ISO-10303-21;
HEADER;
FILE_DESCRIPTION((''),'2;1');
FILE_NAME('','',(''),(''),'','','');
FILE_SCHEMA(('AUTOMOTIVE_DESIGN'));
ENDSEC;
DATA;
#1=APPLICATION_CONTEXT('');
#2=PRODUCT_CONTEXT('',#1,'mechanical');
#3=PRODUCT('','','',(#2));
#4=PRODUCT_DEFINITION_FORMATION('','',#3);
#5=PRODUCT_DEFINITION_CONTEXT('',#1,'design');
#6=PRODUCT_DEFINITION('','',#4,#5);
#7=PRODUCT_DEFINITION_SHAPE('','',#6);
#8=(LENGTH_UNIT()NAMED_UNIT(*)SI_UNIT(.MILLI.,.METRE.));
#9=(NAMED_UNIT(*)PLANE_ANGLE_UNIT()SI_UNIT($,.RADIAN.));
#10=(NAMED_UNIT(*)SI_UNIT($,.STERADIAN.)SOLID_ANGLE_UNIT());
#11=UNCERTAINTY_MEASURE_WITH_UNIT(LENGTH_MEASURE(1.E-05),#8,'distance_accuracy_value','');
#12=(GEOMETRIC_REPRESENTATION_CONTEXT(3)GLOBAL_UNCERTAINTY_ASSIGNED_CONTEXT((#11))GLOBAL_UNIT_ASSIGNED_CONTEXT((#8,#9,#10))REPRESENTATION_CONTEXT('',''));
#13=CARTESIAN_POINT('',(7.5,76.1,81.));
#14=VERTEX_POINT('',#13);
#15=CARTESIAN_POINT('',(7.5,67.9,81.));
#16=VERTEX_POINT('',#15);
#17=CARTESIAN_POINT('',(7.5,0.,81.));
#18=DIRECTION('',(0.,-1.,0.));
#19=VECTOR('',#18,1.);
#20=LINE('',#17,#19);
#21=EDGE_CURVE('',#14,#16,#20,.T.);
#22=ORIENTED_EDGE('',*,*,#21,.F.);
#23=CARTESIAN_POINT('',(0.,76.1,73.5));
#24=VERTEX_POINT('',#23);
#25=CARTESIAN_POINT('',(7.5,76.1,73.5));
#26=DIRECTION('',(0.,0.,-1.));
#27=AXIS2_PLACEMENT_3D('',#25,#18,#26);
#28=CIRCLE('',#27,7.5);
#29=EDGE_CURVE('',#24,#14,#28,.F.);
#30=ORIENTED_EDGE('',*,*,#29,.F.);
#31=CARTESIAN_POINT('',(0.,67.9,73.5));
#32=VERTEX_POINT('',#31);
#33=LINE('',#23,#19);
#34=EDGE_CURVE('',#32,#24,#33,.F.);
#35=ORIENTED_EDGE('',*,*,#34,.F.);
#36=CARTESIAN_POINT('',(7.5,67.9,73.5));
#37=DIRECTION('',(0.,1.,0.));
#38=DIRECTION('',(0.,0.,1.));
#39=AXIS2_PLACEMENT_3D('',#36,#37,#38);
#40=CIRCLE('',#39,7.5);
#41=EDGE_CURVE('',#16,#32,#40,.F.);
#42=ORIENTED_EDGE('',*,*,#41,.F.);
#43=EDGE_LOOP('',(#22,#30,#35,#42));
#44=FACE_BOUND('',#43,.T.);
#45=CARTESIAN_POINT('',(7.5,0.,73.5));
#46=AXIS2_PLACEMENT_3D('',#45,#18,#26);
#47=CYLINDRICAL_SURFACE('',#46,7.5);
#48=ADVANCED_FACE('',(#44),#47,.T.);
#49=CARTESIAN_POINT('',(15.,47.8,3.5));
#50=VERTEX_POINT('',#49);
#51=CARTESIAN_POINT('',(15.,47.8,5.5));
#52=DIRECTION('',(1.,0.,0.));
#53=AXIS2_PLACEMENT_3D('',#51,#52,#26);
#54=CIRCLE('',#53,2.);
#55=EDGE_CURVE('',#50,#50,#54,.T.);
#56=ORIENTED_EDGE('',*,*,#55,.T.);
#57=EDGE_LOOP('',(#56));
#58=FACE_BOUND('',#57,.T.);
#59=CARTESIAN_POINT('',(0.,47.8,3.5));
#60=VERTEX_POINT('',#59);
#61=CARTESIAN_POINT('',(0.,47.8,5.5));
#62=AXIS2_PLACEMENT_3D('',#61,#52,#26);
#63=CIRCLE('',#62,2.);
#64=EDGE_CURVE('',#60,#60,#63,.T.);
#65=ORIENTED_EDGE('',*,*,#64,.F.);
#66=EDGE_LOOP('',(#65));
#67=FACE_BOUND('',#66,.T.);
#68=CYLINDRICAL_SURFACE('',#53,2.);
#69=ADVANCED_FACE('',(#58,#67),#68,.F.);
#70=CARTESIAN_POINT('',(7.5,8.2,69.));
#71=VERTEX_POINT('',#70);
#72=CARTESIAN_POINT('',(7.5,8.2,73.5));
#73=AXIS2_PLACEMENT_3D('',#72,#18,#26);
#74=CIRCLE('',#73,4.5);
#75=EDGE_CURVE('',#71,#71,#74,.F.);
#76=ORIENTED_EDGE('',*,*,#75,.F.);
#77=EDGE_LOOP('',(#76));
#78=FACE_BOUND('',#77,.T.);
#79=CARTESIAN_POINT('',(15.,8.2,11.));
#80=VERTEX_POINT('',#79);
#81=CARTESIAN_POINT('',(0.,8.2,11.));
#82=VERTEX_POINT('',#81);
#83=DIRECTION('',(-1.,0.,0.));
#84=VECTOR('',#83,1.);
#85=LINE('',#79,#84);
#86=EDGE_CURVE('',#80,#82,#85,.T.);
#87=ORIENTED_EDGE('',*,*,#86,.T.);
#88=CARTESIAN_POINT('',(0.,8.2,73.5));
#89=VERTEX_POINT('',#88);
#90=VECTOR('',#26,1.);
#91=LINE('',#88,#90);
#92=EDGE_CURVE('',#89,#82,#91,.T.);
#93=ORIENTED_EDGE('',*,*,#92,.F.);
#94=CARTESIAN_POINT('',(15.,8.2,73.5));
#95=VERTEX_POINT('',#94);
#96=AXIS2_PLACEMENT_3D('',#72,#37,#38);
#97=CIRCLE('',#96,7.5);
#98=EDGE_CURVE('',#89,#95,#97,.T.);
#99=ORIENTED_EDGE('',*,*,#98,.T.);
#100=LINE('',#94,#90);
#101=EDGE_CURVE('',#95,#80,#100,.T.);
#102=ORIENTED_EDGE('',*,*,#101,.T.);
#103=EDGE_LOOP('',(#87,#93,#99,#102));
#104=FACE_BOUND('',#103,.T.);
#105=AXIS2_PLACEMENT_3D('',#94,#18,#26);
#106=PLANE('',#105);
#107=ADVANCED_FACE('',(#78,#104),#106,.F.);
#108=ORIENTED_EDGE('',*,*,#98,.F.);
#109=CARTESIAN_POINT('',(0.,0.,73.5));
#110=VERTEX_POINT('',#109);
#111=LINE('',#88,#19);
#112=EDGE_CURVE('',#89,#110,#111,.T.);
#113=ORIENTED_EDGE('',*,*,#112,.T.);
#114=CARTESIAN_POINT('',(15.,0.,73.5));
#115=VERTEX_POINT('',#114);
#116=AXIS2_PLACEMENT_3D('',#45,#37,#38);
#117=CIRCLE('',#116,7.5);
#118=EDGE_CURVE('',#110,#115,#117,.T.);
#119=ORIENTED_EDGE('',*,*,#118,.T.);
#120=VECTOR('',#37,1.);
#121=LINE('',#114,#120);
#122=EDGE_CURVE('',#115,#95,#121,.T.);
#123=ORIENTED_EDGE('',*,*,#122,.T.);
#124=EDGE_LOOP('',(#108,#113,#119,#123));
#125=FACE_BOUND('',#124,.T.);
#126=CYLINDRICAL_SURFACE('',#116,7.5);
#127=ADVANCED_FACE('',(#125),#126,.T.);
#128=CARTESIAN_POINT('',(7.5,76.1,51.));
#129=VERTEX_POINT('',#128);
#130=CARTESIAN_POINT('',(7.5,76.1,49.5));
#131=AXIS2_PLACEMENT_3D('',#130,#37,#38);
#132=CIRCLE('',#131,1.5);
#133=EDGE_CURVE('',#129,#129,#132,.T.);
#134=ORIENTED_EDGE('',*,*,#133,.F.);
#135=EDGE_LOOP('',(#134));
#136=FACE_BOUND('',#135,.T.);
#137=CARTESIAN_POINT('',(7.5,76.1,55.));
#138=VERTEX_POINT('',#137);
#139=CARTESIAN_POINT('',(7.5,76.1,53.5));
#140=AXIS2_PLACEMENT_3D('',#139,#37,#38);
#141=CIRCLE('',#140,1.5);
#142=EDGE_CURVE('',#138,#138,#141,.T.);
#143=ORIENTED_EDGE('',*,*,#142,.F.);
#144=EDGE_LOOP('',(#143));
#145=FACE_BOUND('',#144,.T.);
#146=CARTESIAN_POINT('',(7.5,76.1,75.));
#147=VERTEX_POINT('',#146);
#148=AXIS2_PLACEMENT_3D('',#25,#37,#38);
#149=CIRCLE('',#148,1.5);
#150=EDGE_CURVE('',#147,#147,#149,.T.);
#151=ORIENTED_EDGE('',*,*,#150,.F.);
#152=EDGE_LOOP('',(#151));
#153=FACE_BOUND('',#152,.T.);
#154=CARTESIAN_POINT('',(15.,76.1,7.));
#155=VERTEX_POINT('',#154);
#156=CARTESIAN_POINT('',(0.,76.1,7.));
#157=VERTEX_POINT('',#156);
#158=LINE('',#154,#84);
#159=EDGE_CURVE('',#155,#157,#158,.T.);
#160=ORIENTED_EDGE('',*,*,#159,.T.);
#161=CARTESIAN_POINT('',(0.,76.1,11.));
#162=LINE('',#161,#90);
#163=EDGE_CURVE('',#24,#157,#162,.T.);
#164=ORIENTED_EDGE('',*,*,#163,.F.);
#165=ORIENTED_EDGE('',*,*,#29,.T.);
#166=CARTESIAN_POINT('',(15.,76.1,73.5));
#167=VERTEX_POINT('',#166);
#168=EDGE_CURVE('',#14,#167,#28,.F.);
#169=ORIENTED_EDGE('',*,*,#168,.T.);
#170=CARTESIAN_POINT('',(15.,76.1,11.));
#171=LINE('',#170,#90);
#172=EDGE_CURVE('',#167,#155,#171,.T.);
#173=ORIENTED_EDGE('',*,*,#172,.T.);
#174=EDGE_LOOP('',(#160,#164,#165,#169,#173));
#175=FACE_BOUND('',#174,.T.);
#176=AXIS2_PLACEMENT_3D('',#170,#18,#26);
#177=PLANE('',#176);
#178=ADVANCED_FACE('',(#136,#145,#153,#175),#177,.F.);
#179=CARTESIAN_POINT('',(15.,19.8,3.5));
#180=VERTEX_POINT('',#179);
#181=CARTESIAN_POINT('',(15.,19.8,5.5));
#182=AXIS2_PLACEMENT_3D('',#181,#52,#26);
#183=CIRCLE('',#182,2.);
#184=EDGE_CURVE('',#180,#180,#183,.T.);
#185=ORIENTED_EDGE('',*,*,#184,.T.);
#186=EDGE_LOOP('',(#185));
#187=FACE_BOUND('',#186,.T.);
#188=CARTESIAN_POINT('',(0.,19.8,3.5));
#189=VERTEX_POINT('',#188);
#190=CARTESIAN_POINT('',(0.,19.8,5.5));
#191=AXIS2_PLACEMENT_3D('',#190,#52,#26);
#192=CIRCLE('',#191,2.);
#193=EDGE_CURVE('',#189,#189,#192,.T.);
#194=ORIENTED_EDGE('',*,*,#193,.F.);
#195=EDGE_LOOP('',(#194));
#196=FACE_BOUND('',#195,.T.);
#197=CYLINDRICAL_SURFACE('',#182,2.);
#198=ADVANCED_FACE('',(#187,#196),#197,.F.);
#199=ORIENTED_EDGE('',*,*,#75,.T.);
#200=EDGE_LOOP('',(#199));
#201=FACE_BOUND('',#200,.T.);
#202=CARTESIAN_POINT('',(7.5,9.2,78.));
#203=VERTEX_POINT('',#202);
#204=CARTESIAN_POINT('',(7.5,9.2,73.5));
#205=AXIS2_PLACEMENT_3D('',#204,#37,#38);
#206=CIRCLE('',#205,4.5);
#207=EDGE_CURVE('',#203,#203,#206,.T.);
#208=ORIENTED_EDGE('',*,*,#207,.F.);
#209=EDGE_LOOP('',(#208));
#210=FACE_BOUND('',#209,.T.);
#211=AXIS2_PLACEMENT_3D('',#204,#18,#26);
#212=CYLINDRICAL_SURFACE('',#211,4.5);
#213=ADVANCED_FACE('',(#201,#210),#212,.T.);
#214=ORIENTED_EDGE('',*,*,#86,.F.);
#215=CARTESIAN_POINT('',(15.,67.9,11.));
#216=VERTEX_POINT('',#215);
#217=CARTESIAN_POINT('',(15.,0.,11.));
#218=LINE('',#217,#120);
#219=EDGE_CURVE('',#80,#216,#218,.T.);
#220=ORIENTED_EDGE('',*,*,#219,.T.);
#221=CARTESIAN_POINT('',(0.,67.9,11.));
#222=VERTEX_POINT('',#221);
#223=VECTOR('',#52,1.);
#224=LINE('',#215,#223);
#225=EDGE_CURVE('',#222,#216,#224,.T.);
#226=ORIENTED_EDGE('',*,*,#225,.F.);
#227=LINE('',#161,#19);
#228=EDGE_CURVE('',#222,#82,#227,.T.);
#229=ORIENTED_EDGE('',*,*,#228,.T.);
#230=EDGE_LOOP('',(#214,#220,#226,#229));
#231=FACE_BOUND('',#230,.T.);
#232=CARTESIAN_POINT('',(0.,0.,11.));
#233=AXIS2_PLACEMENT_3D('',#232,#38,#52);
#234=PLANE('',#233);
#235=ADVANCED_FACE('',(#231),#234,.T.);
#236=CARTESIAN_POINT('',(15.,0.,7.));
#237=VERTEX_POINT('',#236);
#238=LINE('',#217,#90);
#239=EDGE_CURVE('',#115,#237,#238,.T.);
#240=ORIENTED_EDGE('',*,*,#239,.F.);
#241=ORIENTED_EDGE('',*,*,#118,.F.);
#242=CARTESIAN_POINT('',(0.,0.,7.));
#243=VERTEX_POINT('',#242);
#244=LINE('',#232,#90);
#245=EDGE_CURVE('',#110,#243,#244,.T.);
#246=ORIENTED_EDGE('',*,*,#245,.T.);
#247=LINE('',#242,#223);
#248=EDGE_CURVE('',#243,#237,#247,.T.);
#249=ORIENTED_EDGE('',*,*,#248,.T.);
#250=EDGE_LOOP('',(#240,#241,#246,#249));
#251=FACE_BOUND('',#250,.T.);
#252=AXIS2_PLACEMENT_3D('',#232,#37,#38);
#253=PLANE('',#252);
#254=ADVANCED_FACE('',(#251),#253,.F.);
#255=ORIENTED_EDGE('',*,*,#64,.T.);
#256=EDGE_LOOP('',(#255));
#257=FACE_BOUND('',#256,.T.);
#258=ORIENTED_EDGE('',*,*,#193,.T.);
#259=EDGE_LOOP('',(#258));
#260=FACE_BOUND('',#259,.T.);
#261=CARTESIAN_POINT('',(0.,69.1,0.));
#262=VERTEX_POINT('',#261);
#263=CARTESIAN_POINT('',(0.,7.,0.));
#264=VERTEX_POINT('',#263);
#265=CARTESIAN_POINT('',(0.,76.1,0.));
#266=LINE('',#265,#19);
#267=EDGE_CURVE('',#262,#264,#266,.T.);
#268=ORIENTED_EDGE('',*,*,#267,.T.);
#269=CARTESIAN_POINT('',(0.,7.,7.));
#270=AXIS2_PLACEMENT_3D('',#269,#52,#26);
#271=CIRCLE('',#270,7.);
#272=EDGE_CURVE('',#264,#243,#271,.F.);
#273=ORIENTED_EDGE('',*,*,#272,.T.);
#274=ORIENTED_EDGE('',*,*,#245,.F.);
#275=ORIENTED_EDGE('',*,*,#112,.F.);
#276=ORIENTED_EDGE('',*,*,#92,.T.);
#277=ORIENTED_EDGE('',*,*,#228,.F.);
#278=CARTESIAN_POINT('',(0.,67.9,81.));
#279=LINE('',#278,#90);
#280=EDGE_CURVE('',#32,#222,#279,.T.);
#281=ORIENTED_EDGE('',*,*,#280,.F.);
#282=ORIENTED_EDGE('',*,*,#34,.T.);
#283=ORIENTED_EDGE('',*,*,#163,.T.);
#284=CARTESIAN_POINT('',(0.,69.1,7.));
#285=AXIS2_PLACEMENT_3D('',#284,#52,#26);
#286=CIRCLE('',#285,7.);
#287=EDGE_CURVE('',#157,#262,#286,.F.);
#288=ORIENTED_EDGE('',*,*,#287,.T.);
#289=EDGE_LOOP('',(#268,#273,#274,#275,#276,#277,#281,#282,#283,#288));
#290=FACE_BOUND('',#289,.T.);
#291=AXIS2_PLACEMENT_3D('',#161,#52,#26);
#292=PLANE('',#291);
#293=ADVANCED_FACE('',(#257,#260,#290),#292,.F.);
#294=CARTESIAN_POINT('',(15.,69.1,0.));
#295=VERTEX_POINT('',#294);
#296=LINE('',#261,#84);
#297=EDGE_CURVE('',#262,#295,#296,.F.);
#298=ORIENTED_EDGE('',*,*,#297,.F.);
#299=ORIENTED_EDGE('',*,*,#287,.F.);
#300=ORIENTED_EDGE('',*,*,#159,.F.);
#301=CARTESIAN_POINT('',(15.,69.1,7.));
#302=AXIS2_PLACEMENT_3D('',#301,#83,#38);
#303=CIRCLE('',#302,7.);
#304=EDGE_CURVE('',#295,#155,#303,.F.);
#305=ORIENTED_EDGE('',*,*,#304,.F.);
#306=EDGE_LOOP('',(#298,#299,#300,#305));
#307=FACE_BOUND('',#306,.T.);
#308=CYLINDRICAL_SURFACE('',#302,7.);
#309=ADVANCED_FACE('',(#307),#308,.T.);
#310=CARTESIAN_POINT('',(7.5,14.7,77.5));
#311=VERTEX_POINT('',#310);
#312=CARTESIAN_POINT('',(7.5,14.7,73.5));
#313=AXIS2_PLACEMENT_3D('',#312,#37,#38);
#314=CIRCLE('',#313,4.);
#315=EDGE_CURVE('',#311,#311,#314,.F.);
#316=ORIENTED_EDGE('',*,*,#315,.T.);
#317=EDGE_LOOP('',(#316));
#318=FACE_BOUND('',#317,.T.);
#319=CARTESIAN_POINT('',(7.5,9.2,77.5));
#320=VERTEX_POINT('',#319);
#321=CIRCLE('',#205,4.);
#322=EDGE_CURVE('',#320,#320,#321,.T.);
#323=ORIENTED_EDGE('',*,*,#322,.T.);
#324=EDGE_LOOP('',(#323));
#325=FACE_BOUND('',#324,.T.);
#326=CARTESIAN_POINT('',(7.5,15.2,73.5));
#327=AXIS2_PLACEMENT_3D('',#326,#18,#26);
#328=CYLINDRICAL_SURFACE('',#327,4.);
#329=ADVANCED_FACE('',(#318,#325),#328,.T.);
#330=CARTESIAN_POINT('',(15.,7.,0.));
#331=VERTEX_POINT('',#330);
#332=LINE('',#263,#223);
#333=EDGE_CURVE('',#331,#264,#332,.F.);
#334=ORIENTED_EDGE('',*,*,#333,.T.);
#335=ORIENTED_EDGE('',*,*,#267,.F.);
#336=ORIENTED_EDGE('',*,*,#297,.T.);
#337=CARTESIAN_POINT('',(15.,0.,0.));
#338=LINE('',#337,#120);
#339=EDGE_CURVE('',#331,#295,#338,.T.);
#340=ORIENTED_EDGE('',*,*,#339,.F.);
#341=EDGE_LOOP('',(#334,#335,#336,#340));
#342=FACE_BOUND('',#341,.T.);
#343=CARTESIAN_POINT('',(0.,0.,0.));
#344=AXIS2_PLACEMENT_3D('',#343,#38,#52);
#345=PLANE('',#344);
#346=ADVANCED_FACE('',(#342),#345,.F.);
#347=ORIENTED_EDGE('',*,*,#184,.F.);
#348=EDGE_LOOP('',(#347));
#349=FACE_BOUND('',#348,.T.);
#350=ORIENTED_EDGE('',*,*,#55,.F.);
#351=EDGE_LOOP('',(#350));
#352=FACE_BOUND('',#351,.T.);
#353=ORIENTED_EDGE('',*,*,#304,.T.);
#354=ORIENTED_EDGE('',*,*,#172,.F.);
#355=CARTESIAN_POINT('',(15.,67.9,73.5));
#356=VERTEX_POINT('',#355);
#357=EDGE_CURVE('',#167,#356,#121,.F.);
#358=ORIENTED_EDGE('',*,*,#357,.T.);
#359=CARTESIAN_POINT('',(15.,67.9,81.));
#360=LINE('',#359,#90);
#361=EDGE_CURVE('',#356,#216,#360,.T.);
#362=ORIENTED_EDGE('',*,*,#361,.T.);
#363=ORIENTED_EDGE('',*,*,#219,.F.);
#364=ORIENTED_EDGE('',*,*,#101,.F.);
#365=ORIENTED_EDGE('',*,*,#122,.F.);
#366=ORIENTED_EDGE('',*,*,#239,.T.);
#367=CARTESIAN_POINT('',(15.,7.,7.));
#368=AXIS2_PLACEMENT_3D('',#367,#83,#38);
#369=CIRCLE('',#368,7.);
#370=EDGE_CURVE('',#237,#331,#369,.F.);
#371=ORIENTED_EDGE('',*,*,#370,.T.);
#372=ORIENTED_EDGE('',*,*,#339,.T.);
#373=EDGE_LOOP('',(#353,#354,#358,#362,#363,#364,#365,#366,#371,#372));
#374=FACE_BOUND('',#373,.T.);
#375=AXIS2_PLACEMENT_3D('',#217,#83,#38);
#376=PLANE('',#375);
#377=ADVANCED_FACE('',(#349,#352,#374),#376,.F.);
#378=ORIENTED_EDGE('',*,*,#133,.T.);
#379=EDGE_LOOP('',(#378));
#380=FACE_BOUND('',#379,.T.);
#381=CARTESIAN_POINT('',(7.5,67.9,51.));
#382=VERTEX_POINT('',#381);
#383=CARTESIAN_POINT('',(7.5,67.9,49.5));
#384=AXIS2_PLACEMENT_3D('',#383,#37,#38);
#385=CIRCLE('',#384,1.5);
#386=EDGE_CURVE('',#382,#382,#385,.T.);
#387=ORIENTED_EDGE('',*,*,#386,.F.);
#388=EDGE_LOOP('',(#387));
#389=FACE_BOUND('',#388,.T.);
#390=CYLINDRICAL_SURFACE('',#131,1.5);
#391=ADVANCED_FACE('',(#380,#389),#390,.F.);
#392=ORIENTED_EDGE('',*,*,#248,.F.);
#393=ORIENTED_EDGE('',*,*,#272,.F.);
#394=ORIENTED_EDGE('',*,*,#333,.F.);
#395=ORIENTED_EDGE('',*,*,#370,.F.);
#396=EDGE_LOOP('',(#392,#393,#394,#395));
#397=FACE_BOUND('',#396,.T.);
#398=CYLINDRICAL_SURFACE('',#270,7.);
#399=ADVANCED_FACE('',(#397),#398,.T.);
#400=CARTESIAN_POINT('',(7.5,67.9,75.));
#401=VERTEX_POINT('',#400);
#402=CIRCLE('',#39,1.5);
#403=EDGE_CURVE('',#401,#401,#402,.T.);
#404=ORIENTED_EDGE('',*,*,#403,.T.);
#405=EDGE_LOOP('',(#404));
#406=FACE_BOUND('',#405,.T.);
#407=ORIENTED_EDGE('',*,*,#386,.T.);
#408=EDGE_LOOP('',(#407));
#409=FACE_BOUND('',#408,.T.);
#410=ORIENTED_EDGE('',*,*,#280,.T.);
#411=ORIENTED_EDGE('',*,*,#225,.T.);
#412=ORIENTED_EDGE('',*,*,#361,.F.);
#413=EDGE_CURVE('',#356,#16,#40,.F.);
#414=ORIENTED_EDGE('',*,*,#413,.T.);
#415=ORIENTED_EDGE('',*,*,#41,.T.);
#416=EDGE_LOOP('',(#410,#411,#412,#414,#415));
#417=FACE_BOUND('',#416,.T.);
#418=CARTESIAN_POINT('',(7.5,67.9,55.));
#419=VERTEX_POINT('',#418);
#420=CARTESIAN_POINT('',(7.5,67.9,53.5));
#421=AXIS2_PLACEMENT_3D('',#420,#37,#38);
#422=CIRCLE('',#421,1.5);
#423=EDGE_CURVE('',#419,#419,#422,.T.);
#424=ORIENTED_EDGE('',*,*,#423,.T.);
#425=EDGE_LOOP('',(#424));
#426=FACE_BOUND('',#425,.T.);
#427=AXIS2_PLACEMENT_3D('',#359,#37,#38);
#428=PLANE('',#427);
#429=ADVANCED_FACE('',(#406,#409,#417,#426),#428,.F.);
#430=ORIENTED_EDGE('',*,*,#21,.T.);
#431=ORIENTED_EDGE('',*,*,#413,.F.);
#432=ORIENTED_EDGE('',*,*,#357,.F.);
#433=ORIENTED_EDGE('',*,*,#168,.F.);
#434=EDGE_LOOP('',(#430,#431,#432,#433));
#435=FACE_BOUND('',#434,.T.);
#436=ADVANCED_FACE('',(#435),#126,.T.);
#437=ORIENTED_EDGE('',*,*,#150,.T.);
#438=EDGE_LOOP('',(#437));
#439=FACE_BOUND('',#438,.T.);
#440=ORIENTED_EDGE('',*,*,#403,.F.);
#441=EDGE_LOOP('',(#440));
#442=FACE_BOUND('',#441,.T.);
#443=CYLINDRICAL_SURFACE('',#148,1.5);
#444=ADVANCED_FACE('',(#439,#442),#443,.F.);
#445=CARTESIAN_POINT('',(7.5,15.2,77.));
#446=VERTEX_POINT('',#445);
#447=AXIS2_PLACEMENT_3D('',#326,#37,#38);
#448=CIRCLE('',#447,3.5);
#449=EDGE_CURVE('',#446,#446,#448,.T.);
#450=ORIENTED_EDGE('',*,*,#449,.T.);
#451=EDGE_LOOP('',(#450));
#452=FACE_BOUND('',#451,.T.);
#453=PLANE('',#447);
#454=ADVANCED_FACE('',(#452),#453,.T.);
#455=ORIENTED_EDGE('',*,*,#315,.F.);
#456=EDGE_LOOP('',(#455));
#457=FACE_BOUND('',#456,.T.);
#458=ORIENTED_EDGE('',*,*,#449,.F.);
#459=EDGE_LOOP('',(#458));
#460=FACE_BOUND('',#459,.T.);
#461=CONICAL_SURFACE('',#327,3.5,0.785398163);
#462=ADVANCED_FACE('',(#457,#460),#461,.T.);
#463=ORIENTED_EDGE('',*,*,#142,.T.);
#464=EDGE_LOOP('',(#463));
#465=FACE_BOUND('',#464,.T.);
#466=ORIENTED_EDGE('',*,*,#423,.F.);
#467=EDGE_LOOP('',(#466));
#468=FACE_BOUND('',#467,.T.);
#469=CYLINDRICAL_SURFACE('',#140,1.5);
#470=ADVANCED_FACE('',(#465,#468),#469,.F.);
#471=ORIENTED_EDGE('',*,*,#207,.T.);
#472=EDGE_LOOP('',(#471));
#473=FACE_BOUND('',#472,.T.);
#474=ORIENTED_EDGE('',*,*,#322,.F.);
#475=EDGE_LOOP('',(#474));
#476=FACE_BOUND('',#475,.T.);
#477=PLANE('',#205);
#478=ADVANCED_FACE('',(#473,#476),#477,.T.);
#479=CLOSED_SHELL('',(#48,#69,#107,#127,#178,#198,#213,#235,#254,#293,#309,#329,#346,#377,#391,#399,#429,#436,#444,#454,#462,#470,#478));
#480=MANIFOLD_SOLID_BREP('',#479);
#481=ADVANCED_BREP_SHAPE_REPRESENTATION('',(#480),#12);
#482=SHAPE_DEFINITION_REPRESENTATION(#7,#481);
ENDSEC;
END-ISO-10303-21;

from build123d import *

# Parameters (mm, degrees)
SCHIZZO1_W                   = 15
SCHIZZO1_H                   = 76.1
ESTRUSIONE_ESTRUSIONE1_DEPTH = 11
SCHIZZO2_W                   = 15
SCHIZZO2_H                   = 8.2
ESTRUSIONE_ESTRUSIONE2_DEPTH = 62.5
SCHIZZO3_R                   = 7.5
ESTRUSIONE_ESTRUSIONE3_DEPTH = 8.2
SCHIZZO4_R                   = 4
ESTRUSIONE_ESTRUSIONE4_DEPTH = 7
SMUSSO1_SIZE                 = 0.5
SCHIZZO5_W                   = 15
SCHIZZO5_H                   = 8.2
ESTRUSIONE_ESTRUSIONE5_DEPTH = 70
F_3_0_3_DIAMETER_HOLE1_D     = 3
F_3_0_3_DIAMETER_HOLE1_DEPTH = 10
F_3_0_3_DIAMETER_HOLE1_TIP   = 0.901290929
RACCORDO1_R                  = 7.5
RACCORDO2_R                  = 7
F_4_0_4_DIAMETER_HOLE1_D     = 4
SCHIZZO12_R                  = 4.5
ESTRUSIONE_ESTRUSIONE6_DEPTH = 1
F_3_0_3_DIAMETER_HOLE2_D     = 3
F_3_0_3_DIAMETER_HOLE2_DEPTH = 8.2


with BuildPart() as part:
    # Schizzo1 → Estrusione-Estrusione1 (new body)
    with BuildSketch(Plane.XY):
        with Locations((7.5, 38.05)):
            Rectangle(SCHIZZO1_W, SCHIZZO1_H)
    extrude(amount=ESTRUSIONE_ESTRUSIONE1_DEPTH)

    # Schizzo2 → Estrusione-Estrusione2 (add)
    with BuildSketch(Plane.XY.offset(11)):
        with Locations((7.5, 4.1)):
            Rectangle(SCHIZZO2_W, SCHIZZO2_H)
    extrude(amount=ESTRUSIONE_ESTRUSIONE2_DEPTH)

    # Schizzo3 → Estrusione-Estrusione3 (add)
    with BuildSketch(Plane(origin=(0, 8.2, 0), x_dir=(1, 0, 0), z_dir=(0, 1, 0))):
        with Locations((7.5, -73.5)):
            Circle(SCHIZZO3_R)
    extrude(amount=-ESTRUSIONE_ESTRUSIONE3_DEPTH)

    # Schizzo4 → Estrusione-Estrusione4 (add)
    with BuildSketch(Plane(origin=(0, 8.2, 0), x_dir=(1, 0, 0), z_dir=(0, 1, 0))):
        with Locations(Location((7.5, -73.5, 0), (0, 0, 90))):
            Circle(SCHIZZO4_R)
    extrude(amount=ESTRUSIONE_ESTRUSIONE4_DEPTH)

    # Smusso1
    smusso1_edges = [part.edges().sort_by_distance(p)[0] for p in [
        (7.5, 15.2, 77.5),
    ]]
    chamfer(smusso1_edges, length=SMUSSO1_SIZE)

    # Schizzo5 → Estrusione-Estrusione5 (add)
    with BuildSketch(Plane.XY.offset(11)):
        with Locations((7.5, 72)):
            Rectangle(SCHIZZO5_W, SCHIZZO5_H)
    extrude(amount=ESTRUSIONE_ESTRUSIONE5_DEPTH)

    # Ø3.0 (3) Diameter Hole1
    with Locations(Plane(origin=(0, 76.1, 0), x_dir=(1, 0, 0), z_dir=(0, 1, 0))):
        with Locations((7.5, -49.5), (7.5, -53.5)):
            Hole(F_3_0_3_DIAMETER_HOLE1_D / 2, depth=F_3_0_3_DIAMETER_HOLE1_DEPTH)
            with Locations((0, 0, -(F_3_0_3_DIAMETER_HOLE1_DEPTH + F_3_0_3_DIAMETER_HOLE1_TIP / 2))):  # 118° drill point
                Cone(0, F_3_0_3_DIAMETER_HOLE1_D / 2, F_3_0_3_DIAMETER_HOLE1_TIP, mode=Mode.SUBTRACT)

    # Raccordo1
    raccordo1_edges = [part.edges().sort_by_distance(p)[0] for p in [
        (15, 72, 81),
        (0, 72, 81),
    ]]
    fillet(raccordo1_edges, radius=RACCORDO1_R - 0.0001)  # a hair under: the kernel refuses the full size

    # Raccordo2
    raccordo2_edges = [part.edges().sort_by_distance(p)[0] for p in [
        (7.5, 76.1, 0),
        (7.5, 0, 0),
    ]]
    fillet(raccordo2_edges, radius=RACCORDO2_R)

    # Ø4.0 (4) Diameter Hole1 (through all)
    with Locations(Plane(origin=(15, 0, 0), x_dir=(0, 0, -1), z_dir=(1, 0, 0))):
        with Locations((-5.5, 19.8), (-5.5, 47.8)):
            Hole(F_4_0_4_DIAMETER_HOLE1_D / 2)

    # Schizzo12 → Estrusione-Estrusione6 (add)
    with BuildSketch(Plane(origin=(0, 8.2, 0), x_dir=(1, 0, 0), z_dir=(0, 1, 0))):
        with Locations(Location((7.5, -73.5, 0), (0, 0, 90))):
            Circle(SCHIZZO12_R)
    extrude(amount=ESTRUSIONE_ESTRUSIONE6_DEPTH)

    # Ø3.0 (3) Diameter Hole2
    with Locations(Plane(origin=(0, 76.1, 0), x_dir=(1, 0, 0), z_dir=(0, 1, 0))):
        with Locations((7.5, -73.5)):
            Hole(F_3_0_3_DIAMETER_HOLE2_D / 2, depth=F_3_0_3_DIAMETER_HOLE2_DEPTH)


solid = part.part
